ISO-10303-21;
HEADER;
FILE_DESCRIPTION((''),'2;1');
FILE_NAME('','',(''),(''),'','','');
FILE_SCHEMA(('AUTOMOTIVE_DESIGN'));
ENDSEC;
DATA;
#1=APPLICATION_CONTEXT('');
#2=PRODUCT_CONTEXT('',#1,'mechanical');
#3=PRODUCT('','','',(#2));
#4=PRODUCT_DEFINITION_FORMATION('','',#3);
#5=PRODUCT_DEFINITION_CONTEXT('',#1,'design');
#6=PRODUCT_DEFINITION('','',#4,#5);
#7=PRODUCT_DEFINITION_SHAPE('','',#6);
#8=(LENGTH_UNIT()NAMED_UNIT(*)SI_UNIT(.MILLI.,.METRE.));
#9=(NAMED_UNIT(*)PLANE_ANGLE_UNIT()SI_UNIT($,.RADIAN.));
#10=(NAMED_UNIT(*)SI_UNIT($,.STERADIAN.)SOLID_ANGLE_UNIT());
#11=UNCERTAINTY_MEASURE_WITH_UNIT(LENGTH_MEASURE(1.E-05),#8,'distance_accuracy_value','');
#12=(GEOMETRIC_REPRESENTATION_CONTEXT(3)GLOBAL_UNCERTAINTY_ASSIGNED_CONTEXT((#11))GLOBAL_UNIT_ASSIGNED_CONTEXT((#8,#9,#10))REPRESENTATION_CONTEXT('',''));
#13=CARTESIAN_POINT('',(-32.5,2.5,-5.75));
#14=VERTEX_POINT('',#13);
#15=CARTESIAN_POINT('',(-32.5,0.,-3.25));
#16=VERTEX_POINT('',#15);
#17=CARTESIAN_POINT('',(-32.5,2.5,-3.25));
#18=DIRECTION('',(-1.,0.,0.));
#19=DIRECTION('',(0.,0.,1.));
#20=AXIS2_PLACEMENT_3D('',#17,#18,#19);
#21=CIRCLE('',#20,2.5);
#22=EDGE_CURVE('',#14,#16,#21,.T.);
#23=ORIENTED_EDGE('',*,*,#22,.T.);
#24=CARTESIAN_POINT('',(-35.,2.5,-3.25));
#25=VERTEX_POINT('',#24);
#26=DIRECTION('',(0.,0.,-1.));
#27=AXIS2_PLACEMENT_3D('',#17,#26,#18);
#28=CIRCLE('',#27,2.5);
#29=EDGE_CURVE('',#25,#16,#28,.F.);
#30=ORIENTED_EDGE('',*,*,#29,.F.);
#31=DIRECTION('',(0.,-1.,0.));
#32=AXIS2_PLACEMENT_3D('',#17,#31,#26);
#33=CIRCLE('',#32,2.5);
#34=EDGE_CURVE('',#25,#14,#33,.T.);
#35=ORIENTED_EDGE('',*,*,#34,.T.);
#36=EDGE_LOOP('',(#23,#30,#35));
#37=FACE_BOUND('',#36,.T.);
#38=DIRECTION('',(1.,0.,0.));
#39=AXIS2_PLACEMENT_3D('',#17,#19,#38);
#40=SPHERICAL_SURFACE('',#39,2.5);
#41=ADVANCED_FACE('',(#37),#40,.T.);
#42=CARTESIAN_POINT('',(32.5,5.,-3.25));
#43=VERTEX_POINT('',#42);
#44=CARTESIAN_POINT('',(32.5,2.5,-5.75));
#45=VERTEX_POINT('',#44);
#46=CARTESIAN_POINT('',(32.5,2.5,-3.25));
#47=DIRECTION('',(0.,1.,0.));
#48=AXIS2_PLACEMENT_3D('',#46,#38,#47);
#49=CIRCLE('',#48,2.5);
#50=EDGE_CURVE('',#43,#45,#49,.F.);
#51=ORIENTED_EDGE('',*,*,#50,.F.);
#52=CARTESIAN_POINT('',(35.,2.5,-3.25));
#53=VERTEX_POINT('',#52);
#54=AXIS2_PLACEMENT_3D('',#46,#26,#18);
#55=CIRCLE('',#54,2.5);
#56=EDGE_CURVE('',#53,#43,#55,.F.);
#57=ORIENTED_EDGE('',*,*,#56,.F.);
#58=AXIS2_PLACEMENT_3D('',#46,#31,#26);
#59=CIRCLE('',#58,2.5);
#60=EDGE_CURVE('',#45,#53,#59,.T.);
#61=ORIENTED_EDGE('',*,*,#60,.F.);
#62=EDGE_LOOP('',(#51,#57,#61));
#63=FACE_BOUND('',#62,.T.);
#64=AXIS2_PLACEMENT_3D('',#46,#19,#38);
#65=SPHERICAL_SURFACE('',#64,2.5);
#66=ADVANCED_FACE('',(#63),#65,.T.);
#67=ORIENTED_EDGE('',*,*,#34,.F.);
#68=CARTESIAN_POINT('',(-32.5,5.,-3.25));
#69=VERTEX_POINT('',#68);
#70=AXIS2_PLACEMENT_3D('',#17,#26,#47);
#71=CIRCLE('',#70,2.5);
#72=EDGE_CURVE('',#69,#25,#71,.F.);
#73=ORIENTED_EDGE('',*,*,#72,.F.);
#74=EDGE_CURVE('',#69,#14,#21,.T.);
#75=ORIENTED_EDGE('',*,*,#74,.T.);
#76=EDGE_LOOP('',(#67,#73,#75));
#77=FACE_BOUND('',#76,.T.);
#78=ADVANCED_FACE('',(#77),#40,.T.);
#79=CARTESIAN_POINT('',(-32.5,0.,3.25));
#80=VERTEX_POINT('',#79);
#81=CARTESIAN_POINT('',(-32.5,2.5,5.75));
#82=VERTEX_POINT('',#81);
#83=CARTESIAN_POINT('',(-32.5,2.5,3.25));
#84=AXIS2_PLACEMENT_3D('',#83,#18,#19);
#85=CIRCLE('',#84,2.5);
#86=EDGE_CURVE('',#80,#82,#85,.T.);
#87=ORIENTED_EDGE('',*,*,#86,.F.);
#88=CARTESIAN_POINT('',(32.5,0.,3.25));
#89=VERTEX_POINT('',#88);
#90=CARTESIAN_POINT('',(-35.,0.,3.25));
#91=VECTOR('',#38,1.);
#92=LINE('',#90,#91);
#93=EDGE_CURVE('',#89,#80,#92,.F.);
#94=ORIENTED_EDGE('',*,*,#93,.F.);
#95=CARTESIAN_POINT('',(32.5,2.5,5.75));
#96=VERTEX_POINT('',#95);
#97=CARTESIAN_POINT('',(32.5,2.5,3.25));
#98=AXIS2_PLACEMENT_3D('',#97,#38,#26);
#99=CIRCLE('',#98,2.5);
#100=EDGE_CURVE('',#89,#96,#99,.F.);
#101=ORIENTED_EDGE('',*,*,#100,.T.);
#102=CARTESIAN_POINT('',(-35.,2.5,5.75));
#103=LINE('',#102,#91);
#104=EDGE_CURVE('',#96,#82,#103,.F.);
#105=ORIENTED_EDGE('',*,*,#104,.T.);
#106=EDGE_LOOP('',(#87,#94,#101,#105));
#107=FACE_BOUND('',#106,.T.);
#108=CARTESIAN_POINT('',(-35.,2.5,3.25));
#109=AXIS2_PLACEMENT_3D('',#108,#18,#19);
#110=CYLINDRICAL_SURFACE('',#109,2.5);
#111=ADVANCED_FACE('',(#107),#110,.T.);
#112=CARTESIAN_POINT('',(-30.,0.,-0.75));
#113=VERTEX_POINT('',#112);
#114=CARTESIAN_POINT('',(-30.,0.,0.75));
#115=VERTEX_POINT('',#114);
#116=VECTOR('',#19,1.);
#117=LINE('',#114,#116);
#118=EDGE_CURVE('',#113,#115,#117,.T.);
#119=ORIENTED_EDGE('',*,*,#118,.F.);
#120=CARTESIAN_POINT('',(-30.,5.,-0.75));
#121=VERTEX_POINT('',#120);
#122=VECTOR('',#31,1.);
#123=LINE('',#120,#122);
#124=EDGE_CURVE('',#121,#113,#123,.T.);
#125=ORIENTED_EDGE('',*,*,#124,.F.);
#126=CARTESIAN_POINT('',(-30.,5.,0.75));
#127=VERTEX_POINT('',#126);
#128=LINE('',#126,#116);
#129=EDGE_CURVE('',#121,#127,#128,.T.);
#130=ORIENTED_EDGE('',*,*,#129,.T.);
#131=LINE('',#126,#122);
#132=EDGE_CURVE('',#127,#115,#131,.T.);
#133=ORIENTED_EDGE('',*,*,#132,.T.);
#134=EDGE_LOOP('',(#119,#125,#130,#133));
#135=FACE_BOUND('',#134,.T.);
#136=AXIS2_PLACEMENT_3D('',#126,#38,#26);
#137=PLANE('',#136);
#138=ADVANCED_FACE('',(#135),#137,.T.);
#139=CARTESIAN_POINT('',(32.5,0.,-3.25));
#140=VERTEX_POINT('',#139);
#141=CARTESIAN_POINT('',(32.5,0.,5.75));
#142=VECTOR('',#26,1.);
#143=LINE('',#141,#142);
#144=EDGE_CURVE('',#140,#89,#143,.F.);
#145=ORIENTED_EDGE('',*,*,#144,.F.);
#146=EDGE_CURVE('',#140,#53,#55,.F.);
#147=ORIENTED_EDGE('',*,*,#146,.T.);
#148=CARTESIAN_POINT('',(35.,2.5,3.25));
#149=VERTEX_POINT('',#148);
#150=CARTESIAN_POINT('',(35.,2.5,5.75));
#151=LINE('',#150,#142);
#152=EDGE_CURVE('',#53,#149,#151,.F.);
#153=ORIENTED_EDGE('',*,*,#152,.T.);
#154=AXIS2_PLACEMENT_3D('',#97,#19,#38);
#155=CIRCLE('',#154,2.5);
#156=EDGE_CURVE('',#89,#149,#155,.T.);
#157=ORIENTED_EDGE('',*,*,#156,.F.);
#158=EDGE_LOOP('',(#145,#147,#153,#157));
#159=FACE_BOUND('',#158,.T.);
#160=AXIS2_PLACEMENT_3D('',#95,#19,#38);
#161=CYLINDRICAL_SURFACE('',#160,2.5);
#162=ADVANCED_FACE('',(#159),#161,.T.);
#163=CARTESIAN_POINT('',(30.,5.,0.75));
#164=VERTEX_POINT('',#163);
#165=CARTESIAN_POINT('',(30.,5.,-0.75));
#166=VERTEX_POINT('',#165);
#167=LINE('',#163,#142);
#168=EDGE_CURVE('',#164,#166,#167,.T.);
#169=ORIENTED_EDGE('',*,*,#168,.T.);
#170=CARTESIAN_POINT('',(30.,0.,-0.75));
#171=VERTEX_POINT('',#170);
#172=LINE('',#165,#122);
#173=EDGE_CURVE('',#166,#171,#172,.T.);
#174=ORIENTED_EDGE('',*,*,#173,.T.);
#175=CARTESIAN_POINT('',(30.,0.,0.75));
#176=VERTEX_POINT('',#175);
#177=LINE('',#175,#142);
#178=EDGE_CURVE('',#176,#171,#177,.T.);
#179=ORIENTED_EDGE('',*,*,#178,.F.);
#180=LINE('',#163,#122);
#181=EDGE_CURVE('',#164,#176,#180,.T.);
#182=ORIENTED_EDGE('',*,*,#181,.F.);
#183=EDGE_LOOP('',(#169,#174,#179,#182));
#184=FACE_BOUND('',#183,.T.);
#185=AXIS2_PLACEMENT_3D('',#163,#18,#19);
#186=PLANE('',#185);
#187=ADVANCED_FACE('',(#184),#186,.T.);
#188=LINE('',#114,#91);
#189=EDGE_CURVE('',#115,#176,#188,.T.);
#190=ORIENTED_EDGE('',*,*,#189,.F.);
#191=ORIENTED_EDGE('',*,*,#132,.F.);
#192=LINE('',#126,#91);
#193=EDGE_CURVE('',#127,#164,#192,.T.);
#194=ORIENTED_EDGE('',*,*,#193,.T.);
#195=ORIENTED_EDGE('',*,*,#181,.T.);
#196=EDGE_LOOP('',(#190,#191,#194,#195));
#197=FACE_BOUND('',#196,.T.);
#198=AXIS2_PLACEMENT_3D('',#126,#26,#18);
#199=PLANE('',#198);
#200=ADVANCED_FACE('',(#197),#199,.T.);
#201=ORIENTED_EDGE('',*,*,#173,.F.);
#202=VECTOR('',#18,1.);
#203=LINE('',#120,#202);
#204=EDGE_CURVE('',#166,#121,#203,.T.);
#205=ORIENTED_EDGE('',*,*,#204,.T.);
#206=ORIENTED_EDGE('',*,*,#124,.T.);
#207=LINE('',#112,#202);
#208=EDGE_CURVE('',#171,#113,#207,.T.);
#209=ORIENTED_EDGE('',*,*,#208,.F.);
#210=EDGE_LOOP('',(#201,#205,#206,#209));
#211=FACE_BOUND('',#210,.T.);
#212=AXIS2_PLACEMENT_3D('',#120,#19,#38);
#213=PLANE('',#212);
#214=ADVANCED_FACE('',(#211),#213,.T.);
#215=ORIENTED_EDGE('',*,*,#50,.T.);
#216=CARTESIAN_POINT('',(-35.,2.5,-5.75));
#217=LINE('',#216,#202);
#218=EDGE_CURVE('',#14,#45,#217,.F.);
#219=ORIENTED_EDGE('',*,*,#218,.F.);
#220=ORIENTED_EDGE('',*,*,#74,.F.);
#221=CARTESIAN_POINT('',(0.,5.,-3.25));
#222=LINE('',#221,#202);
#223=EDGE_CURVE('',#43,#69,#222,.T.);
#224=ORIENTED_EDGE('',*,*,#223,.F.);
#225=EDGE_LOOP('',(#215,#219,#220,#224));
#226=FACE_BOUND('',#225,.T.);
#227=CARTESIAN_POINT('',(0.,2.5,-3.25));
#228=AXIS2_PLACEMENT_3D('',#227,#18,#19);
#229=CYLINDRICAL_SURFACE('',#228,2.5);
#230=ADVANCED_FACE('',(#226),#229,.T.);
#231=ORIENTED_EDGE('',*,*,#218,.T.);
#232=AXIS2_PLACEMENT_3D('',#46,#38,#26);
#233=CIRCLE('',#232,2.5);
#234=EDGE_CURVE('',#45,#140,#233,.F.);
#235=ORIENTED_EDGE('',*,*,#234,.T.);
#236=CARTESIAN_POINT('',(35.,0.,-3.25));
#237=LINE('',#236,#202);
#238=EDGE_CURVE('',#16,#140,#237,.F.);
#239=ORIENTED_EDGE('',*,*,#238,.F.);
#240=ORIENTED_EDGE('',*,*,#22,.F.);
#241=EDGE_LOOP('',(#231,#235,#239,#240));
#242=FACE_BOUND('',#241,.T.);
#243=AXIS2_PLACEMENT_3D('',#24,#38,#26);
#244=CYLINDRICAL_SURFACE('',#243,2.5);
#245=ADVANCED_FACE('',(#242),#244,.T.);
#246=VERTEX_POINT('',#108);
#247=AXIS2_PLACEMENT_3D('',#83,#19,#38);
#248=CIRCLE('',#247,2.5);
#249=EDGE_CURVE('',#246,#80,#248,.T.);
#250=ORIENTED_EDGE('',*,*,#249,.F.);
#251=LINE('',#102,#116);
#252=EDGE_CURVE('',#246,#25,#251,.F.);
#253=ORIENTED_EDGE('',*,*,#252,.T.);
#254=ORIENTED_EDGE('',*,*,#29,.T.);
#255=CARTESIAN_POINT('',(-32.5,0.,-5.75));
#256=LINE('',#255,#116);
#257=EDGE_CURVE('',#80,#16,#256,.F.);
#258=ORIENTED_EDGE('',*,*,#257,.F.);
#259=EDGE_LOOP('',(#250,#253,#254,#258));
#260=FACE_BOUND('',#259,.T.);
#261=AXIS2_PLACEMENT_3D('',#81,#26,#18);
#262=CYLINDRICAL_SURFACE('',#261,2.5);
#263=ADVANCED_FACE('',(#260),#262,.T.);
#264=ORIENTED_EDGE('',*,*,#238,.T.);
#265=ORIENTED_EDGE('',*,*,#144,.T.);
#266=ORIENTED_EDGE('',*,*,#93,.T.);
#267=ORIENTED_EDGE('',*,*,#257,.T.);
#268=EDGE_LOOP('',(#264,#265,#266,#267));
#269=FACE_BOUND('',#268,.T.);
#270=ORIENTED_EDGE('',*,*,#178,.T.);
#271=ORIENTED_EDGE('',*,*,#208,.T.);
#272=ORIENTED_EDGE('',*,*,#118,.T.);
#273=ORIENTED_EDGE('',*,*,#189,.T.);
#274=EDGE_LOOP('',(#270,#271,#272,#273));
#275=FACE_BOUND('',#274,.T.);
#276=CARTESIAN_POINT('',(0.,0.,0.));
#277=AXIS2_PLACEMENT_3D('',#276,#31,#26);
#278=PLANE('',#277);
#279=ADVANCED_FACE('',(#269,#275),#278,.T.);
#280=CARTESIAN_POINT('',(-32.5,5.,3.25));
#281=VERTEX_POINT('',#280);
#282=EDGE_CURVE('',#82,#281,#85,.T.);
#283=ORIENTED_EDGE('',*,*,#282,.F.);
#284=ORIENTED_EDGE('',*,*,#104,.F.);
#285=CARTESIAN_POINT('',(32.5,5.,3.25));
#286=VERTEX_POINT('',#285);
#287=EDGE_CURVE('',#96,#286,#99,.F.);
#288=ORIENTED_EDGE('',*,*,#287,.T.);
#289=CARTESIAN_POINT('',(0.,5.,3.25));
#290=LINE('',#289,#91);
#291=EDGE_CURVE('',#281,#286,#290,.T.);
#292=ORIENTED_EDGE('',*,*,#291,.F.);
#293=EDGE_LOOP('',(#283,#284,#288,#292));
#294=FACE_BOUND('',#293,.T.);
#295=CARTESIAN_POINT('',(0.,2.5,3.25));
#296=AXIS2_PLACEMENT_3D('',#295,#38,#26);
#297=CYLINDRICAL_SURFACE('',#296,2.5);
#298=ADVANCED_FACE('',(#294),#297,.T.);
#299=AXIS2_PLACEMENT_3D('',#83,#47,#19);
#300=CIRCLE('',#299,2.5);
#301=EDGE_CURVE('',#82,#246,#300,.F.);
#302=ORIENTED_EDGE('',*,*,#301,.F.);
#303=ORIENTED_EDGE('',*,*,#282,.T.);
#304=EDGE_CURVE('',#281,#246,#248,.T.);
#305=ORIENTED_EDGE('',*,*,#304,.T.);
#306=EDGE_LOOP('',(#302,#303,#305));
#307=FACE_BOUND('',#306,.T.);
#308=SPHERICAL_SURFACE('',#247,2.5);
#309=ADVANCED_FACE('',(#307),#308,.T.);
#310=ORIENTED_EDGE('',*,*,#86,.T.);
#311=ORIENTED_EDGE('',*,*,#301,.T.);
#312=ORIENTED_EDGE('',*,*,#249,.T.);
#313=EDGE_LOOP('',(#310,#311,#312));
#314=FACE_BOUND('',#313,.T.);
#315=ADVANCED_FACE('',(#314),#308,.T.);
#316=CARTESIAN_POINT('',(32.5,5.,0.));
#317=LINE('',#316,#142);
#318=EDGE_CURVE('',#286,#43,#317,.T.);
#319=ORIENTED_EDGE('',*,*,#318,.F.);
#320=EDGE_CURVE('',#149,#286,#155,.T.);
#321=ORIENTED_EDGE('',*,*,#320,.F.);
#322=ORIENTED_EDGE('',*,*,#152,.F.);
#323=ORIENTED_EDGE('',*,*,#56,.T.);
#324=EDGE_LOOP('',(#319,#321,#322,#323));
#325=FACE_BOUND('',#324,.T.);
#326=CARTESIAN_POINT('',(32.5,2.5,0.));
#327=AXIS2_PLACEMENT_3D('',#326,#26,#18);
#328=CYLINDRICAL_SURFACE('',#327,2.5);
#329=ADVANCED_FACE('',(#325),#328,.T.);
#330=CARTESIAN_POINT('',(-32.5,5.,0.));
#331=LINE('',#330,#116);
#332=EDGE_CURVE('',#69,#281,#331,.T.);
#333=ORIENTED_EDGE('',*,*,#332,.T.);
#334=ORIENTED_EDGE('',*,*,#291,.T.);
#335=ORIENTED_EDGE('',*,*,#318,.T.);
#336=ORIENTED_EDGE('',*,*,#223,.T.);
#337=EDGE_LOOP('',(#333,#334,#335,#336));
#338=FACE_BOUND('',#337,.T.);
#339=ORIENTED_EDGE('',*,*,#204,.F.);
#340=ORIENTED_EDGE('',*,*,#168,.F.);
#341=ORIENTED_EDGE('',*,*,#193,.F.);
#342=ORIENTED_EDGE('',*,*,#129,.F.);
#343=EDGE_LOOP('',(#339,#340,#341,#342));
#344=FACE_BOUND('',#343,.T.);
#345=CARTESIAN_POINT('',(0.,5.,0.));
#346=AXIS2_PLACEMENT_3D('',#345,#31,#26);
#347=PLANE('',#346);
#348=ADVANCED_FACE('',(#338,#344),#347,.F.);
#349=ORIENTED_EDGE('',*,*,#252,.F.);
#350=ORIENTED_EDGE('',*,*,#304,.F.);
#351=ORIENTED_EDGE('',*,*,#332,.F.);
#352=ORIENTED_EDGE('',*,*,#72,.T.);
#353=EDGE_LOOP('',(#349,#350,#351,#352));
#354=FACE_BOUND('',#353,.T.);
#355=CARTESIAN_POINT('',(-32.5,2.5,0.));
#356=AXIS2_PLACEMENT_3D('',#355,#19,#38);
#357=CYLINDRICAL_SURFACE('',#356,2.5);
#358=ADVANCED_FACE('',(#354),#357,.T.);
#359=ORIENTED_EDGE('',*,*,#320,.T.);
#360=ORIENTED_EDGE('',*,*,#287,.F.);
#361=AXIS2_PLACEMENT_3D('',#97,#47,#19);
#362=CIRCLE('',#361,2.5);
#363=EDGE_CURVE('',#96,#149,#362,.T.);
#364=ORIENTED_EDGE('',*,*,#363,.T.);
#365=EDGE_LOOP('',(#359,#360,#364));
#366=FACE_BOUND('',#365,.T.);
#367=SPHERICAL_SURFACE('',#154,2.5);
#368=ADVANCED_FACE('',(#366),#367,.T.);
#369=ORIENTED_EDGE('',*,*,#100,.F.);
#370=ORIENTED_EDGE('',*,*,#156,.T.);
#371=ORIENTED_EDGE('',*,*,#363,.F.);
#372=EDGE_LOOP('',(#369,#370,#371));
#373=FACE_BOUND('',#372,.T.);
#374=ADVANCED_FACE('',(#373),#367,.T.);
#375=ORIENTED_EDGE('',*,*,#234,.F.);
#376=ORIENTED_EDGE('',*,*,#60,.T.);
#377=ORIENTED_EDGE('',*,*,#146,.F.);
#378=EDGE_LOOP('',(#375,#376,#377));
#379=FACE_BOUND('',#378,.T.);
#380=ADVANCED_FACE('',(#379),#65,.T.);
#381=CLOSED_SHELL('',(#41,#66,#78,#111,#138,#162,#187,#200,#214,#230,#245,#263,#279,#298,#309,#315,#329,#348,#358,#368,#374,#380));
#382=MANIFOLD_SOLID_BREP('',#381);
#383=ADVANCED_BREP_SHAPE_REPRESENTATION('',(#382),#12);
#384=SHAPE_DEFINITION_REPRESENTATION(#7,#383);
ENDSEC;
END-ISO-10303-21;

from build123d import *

# Parameters (mm, degrees)
ESQUISSE4_W        = 70
ESQUISSE4_H        = 11.5
ESQUISSE4_W_2      = 60
ESQUISSE4_H_2      = 1.5
BOSS_EXTRU_2_DEPTH = 5
CONG_1_R           = 2.5


with BuildPart() as part:
    # Esquisse4 → Boss.-Extru.2 (new body)
    with BuildSketch(Plane(origin=(0, 0, 0), x_dir=(1, 0, 0), z_dir=(0, 1, 0))):
        Rectangle(ESQUISSE4_W, ESQUISSE4_H)
        Rectangle(ESQUISSE4_W_2, ESQUISSE4_H_2, mode=Mode.SUBTRACT)
    extrude(amount=BOSS_EXTRU_2_DEPTH)

    # Congé1
    cong_1_edges = [part.edges().sort_by_distance(p)[0] for p in [
        (-35, 5, 0),
        (0, 5, 5.75),
        (35, 5, 0),
        (0, 0, 5.75),
        (-35, 0, 0),
        (0, 0, -5.75),
        (35, 0, 0),
        (0, 5, -5.75),
        (35, 2.5, 5.75),
        (-35, 2.5, 5.75),
        (-35, 2.5, -5.75),
        (35, 2.5, -5.75),
    ]]
    fillet(cong_1_edges, radius=CONG_1_R - 0.0001)  # a hair under: the kernel refuses the full size


solid = part.part
